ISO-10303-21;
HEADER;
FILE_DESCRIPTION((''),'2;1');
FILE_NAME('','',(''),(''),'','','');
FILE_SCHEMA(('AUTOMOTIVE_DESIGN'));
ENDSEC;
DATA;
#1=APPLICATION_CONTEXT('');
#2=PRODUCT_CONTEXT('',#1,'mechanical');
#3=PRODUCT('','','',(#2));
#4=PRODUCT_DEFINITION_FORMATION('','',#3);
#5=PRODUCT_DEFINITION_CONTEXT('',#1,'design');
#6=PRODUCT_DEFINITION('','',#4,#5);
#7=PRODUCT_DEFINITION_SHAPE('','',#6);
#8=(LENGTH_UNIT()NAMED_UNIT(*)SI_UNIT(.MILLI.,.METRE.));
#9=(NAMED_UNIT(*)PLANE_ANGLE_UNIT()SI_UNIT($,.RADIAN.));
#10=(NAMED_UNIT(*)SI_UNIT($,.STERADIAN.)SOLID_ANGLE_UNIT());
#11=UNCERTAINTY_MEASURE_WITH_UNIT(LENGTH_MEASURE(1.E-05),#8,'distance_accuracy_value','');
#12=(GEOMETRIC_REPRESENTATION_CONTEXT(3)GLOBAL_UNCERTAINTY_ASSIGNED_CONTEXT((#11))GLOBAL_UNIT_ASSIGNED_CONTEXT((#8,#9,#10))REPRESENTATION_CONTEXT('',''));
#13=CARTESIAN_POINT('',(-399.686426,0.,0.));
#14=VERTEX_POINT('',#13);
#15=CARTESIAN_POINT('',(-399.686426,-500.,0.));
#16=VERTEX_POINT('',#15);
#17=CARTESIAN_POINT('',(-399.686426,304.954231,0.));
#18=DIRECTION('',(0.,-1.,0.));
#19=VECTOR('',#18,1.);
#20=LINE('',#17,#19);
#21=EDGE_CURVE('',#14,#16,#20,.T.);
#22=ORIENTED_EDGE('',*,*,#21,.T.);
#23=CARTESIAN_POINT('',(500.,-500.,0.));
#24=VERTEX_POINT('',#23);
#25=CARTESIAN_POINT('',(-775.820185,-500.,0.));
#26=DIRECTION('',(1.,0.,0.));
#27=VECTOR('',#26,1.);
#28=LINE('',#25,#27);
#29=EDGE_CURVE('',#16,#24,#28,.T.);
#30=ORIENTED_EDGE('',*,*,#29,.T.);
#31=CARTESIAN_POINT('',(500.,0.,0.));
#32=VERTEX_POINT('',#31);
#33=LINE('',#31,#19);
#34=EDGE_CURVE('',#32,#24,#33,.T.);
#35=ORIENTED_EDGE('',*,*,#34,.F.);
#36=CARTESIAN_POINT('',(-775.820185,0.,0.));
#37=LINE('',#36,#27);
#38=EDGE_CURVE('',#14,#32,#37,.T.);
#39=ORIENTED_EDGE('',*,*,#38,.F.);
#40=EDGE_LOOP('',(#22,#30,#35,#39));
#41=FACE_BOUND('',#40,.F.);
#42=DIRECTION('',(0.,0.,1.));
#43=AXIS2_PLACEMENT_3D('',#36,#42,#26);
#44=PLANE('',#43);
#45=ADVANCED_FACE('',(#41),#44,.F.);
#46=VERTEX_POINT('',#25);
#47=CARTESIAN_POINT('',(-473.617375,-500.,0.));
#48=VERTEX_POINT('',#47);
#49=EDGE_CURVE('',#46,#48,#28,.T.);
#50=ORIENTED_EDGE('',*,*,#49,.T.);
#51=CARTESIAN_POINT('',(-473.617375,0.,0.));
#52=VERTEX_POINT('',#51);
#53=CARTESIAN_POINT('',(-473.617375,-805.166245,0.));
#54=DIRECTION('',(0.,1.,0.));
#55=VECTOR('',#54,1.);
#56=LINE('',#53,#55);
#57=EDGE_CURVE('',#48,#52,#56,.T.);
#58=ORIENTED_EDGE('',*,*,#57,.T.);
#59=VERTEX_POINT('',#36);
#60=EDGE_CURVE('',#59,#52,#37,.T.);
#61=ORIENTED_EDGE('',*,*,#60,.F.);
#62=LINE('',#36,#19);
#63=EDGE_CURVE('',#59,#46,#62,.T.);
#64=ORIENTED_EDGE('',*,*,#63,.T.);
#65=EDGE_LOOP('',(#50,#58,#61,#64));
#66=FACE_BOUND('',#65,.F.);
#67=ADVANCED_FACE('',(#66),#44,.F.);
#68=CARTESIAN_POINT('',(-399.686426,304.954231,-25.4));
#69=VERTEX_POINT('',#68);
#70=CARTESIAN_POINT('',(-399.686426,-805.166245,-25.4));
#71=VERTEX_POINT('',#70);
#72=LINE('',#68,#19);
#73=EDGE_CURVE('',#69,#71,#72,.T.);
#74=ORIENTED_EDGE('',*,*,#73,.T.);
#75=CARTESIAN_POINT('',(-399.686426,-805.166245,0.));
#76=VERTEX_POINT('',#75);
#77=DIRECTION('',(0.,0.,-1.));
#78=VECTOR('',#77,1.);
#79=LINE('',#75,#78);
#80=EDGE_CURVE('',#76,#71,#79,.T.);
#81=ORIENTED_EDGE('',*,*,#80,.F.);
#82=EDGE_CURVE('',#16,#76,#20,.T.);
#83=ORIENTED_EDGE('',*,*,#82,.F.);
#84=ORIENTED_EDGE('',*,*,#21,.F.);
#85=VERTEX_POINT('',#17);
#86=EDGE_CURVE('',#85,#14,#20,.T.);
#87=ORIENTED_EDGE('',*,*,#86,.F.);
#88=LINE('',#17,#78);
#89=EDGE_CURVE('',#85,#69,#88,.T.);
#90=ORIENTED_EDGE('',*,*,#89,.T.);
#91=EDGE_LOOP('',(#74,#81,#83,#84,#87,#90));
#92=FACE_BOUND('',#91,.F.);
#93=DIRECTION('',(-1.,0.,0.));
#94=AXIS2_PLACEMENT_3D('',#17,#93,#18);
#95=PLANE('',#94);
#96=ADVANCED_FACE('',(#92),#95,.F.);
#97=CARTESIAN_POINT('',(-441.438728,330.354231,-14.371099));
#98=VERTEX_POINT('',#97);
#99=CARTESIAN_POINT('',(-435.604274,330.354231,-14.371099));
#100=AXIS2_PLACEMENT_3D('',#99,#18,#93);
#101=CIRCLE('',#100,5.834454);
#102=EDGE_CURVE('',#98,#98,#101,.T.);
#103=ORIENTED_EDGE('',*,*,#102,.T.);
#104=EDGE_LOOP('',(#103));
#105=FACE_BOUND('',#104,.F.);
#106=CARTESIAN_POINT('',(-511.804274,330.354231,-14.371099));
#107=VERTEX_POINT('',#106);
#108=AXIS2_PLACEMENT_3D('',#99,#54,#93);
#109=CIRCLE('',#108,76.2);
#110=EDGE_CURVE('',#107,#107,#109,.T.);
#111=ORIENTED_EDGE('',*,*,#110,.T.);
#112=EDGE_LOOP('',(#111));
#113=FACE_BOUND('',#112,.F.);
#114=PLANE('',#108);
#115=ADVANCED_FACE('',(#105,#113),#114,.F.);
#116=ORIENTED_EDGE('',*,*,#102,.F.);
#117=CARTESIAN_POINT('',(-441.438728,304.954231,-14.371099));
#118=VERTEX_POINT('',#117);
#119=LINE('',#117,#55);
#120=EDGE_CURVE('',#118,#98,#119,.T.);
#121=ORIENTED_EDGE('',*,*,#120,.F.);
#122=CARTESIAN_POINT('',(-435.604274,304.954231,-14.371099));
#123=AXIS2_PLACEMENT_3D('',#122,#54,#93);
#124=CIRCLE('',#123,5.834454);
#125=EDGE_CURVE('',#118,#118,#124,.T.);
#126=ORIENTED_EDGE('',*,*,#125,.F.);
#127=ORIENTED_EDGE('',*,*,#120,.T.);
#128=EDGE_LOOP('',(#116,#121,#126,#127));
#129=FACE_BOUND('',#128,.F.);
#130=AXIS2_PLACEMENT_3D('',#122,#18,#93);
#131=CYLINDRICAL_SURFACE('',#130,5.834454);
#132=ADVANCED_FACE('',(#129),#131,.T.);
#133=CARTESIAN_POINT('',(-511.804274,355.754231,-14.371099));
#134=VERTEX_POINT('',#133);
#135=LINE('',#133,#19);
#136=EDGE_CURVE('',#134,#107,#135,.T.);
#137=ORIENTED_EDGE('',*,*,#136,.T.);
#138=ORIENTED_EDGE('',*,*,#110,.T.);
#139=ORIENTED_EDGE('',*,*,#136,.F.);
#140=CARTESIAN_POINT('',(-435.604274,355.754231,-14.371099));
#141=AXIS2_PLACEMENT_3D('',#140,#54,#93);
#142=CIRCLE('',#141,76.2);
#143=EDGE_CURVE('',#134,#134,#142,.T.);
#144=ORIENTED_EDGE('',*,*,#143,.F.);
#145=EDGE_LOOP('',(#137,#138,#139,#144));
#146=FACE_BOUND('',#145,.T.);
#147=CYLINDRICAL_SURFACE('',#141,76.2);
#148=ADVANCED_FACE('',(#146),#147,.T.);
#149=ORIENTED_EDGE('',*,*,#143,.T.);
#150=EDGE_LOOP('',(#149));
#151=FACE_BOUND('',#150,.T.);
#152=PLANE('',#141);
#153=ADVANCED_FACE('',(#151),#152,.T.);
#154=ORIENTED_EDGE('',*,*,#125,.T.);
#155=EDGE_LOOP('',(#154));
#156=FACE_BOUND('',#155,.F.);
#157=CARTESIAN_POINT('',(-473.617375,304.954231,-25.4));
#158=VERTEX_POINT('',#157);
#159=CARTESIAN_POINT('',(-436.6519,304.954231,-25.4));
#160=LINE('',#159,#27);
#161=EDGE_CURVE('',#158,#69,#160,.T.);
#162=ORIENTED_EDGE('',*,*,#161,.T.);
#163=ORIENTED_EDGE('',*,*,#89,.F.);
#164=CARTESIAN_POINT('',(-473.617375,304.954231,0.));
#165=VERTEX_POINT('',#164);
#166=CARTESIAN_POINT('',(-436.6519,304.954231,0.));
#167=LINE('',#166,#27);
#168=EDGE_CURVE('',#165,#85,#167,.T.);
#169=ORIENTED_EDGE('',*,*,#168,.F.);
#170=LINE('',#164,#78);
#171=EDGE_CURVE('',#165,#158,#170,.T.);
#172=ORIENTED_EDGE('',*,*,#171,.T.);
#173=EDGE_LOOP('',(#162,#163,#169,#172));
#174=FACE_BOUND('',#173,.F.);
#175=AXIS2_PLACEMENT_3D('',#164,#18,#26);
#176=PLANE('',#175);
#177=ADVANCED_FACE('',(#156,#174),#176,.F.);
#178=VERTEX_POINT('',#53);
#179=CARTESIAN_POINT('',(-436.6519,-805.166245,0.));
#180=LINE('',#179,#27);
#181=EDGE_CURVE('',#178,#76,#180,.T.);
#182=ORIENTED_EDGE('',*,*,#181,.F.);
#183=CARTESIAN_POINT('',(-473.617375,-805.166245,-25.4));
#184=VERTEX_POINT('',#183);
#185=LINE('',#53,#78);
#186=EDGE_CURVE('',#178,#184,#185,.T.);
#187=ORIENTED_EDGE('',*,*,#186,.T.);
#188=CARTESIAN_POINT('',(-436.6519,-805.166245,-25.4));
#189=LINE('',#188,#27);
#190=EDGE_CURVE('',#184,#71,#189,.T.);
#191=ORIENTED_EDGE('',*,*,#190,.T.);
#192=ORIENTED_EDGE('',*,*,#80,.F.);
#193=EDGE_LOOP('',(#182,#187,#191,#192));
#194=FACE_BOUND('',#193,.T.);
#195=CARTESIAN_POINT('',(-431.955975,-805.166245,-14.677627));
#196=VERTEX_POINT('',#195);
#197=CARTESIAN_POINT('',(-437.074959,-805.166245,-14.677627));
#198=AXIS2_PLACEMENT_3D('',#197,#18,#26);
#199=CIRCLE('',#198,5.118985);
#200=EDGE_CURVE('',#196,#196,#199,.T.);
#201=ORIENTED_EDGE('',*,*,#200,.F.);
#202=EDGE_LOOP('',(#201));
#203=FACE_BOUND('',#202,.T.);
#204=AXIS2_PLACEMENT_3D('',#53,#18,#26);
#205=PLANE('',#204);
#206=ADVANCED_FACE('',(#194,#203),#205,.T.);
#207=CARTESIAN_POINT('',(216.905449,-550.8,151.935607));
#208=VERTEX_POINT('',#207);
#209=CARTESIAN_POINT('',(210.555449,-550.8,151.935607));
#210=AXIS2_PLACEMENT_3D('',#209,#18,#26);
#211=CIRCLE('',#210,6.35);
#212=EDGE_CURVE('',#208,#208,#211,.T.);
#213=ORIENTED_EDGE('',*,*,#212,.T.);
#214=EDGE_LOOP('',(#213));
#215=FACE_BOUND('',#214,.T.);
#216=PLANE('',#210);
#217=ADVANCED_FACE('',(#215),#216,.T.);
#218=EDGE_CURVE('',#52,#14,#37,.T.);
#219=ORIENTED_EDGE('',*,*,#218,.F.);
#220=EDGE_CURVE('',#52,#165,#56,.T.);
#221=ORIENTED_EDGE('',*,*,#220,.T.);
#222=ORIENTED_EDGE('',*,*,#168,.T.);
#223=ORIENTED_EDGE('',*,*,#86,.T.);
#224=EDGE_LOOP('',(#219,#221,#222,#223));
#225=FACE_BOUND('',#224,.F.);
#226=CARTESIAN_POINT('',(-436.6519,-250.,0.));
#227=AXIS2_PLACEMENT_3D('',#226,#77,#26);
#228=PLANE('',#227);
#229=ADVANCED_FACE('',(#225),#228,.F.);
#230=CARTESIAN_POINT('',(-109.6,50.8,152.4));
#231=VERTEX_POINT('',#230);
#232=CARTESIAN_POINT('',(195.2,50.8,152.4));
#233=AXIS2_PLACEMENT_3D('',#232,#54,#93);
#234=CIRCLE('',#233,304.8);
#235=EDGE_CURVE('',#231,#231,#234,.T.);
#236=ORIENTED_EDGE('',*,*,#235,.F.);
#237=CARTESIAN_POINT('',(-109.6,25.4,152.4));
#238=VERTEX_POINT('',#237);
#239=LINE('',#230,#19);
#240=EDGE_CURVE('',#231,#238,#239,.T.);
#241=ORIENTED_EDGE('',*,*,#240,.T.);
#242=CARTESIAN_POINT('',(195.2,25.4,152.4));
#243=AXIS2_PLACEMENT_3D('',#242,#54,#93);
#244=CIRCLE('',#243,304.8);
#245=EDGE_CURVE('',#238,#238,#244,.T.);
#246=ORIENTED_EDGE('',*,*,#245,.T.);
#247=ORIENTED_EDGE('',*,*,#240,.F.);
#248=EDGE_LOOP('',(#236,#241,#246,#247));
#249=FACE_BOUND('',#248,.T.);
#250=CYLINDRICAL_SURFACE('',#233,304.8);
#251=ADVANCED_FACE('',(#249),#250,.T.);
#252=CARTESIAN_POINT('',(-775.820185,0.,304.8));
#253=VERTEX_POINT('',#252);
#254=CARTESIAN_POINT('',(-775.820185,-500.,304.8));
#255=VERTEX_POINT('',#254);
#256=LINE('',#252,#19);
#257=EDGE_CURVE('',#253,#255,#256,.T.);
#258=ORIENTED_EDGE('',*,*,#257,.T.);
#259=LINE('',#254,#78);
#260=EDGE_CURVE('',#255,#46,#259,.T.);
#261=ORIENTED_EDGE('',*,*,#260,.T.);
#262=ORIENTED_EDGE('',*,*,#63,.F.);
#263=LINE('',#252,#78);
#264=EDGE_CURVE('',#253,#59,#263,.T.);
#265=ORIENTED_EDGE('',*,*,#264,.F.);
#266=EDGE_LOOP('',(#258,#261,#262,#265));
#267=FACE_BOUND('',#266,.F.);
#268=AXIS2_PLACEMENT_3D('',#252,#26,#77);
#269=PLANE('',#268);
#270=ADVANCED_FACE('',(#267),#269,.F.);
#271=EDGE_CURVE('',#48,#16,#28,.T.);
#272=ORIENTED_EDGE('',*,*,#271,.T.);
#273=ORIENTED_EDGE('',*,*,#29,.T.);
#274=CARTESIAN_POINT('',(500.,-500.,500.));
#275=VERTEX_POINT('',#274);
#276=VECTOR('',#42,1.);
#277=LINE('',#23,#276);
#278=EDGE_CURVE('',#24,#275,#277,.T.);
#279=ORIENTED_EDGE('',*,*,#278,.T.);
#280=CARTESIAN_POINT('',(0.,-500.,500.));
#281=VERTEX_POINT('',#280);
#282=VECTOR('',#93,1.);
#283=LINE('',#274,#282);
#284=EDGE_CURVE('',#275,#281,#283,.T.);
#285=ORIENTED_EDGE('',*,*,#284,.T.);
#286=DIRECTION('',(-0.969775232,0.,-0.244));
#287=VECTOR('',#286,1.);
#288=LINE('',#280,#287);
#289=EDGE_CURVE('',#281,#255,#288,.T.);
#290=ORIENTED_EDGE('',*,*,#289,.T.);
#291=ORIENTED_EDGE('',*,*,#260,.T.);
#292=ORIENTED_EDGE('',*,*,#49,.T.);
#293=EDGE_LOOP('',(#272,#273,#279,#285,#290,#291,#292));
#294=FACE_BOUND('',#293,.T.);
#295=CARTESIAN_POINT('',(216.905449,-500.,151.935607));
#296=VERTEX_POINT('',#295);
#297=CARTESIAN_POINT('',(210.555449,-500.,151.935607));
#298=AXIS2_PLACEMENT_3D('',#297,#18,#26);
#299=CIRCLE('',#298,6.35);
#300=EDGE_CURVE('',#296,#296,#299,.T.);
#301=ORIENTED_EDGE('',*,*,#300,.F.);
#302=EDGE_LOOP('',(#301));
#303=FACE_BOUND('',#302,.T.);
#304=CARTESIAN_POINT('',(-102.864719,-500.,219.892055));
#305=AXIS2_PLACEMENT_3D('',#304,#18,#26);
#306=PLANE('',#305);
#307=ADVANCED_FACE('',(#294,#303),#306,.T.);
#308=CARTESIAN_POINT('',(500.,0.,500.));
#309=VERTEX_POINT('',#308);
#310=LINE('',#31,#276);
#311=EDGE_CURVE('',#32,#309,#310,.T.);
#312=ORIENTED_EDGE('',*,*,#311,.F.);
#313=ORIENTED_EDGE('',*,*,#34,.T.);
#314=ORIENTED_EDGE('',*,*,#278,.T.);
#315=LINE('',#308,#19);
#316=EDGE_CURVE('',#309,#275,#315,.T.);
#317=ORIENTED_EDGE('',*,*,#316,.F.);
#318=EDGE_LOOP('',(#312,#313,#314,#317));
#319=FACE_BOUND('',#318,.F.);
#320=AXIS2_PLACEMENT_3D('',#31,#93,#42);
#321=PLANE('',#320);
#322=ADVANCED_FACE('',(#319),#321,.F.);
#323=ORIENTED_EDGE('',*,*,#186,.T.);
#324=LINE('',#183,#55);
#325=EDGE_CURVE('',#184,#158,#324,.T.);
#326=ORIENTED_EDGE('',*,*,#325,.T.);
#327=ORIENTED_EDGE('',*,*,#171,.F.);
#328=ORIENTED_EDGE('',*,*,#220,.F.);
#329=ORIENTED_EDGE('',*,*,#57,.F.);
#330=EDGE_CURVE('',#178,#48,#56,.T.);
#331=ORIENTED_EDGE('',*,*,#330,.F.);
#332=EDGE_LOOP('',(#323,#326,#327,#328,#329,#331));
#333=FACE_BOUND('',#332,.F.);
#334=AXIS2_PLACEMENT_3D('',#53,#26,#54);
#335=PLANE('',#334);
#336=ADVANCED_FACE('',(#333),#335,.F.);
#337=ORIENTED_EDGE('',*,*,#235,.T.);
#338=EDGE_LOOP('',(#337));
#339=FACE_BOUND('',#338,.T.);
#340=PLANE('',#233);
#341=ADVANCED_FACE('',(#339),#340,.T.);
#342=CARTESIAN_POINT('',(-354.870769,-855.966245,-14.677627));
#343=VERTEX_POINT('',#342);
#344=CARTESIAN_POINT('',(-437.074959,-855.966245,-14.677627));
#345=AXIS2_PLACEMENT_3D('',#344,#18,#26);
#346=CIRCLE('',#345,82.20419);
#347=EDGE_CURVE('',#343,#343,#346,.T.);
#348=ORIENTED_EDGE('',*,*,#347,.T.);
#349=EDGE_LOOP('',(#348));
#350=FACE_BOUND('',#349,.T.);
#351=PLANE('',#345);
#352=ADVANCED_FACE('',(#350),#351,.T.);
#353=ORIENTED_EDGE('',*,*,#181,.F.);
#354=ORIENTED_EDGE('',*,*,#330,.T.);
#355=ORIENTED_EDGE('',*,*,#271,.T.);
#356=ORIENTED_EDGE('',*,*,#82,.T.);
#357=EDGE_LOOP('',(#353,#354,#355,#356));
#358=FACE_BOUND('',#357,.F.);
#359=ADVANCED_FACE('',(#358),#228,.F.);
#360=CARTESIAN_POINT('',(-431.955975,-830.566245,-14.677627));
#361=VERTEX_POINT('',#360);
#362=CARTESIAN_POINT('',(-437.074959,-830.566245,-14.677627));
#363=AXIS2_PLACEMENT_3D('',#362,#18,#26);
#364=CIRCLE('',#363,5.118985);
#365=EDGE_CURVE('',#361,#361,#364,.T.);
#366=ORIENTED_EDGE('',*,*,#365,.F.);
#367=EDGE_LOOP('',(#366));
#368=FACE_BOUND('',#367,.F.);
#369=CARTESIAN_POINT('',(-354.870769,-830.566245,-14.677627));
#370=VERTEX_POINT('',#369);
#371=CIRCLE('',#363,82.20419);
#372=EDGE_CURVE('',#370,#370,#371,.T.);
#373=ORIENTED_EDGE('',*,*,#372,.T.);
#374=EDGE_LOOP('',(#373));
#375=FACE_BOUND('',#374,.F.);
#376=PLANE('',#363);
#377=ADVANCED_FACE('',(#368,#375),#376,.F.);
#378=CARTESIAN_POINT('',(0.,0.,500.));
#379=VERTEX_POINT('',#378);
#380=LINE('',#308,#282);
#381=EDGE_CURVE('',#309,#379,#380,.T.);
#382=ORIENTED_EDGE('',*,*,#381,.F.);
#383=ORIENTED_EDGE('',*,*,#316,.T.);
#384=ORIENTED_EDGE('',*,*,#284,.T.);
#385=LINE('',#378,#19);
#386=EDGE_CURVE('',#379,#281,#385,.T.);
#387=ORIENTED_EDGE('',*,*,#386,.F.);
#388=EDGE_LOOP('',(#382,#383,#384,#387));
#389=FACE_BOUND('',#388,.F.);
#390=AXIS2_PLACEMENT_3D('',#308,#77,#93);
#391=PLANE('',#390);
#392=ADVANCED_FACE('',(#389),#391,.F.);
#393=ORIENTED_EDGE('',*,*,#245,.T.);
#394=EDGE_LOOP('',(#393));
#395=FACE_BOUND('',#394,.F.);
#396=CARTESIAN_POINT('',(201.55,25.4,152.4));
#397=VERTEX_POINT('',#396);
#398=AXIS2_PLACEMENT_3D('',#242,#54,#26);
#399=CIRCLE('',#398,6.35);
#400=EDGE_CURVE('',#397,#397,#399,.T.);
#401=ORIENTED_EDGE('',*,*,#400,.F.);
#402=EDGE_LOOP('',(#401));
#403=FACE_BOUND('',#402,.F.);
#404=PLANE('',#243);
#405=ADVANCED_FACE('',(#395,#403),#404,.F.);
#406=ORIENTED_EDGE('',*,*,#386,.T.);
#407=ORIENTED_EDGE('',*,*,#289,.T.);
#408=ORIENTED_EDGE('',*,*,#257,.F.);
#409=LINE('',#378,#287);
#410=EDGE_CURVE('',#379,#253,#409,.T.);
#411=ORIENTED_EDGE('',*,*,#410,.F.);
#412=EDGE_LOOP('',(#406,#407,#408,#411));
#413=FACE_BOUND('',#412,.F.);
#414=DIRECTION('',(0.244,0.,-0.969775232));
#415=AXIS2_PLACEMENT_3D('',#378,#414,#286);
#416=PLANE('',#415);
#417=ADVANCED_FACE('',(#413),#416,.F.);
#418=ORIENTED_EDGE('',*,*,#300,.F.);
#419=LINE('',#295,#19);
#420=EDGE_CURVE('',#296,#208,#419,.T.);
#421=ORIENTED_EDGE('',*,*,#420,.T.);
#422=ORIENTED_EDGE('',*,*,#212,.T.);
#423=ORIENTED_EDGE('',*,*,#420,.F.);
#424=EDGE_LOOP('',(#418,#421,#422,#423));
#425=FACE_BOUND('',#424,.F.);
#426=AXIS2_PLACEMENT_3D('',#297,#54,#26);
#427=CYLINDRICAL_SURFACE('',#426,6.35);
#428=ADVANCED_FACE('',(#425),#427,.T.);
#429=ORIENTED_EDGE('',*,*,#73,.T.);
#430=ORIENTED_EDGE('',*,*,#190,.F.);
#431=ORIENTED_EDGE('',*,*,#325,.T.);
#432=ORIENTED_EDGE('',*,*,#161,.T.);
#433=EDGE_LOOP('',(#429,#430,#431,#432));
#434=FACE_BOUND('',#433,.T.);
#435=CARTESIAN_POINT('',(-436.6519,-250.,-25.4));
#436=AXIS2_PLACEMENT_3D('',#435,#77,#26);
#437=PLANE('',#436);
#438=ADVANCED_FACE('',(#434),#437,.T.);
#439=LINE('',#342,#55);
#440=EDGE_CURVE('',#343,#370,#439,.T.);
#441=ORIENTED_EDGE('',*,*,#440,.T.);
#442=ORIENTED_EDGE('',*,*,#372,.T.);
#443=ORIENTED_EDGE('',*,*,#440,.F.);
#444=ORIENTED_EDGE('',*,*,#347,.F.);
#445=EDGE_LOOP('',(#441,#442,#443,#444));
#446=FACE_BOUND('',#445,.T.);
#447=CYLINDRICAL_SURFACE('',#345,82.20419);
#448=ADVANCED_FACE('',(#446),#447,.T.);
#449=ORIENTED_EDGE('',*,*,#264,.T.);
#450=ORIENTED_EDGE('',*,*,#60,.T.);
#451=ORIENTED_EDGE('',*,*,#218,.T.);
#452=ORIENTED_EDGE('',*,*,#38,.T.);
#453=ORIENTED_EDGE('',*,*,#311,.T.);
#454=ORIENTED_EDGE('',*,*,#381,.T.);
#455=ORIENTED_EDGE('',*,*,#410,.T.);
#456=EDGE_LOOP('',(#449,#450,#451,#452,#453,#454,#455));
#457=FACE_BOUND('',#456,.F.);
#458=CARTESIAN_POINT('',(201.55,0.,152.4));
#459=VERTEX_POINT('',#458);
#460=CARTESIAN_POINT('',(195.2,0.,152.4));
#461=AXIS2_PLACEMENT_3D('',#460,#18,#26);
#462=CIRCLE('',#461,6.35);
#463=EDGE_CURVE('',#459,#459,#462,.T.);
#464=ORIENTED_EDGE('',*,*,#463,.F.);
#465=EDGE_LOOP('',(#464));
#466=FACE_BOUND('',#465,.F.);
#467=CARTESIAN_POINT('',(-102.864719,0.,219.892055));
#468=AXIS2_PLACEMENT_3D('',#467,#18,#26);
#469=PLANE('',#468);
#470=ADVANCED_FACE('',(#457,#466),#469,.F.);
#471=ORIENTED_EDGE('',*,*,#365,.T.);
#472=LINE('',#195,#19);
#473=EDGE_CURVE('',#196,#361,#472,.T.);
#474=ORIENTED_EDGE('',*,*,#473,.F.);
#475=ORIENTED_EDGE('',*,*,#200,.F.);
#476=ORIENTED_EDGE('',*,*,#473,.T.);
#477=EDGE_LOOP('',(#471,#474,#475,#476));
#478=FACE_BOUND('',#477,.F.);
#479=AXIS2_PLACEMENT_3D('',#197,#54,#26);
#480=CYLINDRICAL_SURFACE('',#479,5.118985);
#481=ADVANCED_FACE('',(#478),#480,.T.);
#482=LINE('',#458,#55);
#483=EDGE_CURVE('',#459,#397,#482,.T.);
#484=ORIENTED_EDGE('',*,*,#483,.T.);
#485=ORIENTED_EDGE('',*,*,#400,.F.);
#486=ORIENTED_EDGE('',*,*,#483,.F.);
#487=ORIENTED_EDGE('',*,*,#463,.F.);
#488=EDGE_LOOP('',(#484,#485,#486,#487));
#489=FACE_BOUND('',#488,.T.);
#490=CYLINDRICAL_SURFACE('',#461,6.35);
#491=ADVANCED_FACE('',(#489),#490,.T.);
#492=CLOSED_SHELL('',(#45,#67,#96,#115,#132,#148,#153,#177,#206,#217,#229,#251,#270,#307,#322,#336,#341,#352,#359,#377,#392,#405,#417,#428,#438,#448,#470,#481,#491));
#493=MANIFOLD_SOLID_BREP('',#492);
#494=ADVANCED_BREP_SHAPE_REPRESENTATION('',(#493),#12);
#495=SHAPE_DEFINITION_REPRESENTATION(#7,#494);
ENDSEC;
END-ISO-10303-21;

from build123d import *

# Parameters (mm, degrees)
F1_DEPTH  = 500
F2_W      = 73.9309489727
F2_H      = 500
F2_H_2    = 305.1662445068
F2_H_3    = 304.9542307854
F3_DEPTH  = 25.4
F4_R      = 5.11898469
F5_DEPTH  = 50.8
F6_R      = 82.2041903744
F6_R_2    = 5.11898469
F7_DEPTH  = 25.4
F8_R      = 5.8344538593
F9_DEPTH  = 50.8
F10_R     = 76.2
F11_DEPTH = 25.4
F12_R     = 6.35
F13_DEPTH = 50.8
F14_R     = 304.8
F14_R_2   = 6.35
F15_DEPTH = 25.4
F16_R     = 6.35
F17_DEPTH = 50.8


with BuildPart() as f1:
    # F0 (on Front) → F1 (new body)
    with BuildSketch(Plane.XZ):
        Polygon((-775.8201853523, 304.8), (-775.8201853523, 0), (500, 0), (500, 500), (0, 500), align=None)
    extrude(amount=F1_DEPTH)

    # F2 (on face) → F3 (join)
    with BuildSketch(Plane(origin=(0, 0, 0), x_dir=(1, 0, 0), z_dir=(0, 0, -1))):
        with Locations((-436.6519004107, 250)):
            Rectangle(F2_W, F2_H)
        with Locations((-436.6519004107, 652.5831222534)):
            Rectangle(F2_W, F2_H_2)
        with Locations((-436.6519004107, -152.4771153927)):
            Rectangle(F2_W, F2_H_3)
    extrude(amount=F3_DEPTH)

    # F4 (on face) → F5 (join)
    with BuildSketch(Plane.XZ.offset(805.1662445068)):
        with Locations((-437.0749592781, -14.6776270121)):
            Circle(F4_R)
    extrude(amount=F5_DEPTH)

    # F6 (on face) → F7 (join)
    with BuildSketch(Plane.XZ.offset(855.9662445068)):
        with Locations((-437.0749592781, -14.6776270121)):
            Circle(F6_R)
        with Locations((-437.0749592781, -14.6776270121)):
            Circle(F6_R_2, mode=Mode.SUBTRACT)
    extrude(amount=-F7_DEPTH)

    # F8 (on face) → F9 (join)
    with BuildSketch(Plane(origin=(0, 304.9542307854, 0), x_dir=(-1, 0, 0), z_dir=(0, 1, 0))):
        with Locations((435.6042742729, -14.3710989505)):
            Circle(F8_R)
    extrude(amount=F9_DEPTH)

    # F10 (on face) → F11 (join)
    with BuildSketch(Plane(origin=(0, 355.7542307854, 0), x_dir=(-1, 0, 0), z_dir=(0, 1, 0))):
        with Locations((435.6042742729, -14.3710989505)):
            Circle(F10_R)
    extrude(amount=-F11_DEPTH)

    # F12 (on face) → F13 (join)
    with BuildSketch(Plane.XZ):
        with Locations((195.2, 152.4)):
            Circle(F12_R)
    extrude(amount=-F13_DEPTH)

    # F14 (on face) → F15 (join)
    with BuildSketch(Plane(origin=(0, 50.8, 0), x_dir=(-1, 0, 0), z_dir=(0, 1, 0))):
        with Locations((-195.2, 152.4)):
            Circle(F14_R)
        with Locations((-195.2, 152.4)):
            Circle(F14_R_2, mode=Mode.SUBTRACT)
    extrude(amount=-F15_DEPTH)

    # F16 (on face) → F17 (join)
    with BuildSketch(Plane.XZ.offset(500)):
        with Locations((210.5554491282, 151.9356071949)):
            Circle(F16_R)
    extrude(amount=F17_DEPTH)


solid = f1.part
